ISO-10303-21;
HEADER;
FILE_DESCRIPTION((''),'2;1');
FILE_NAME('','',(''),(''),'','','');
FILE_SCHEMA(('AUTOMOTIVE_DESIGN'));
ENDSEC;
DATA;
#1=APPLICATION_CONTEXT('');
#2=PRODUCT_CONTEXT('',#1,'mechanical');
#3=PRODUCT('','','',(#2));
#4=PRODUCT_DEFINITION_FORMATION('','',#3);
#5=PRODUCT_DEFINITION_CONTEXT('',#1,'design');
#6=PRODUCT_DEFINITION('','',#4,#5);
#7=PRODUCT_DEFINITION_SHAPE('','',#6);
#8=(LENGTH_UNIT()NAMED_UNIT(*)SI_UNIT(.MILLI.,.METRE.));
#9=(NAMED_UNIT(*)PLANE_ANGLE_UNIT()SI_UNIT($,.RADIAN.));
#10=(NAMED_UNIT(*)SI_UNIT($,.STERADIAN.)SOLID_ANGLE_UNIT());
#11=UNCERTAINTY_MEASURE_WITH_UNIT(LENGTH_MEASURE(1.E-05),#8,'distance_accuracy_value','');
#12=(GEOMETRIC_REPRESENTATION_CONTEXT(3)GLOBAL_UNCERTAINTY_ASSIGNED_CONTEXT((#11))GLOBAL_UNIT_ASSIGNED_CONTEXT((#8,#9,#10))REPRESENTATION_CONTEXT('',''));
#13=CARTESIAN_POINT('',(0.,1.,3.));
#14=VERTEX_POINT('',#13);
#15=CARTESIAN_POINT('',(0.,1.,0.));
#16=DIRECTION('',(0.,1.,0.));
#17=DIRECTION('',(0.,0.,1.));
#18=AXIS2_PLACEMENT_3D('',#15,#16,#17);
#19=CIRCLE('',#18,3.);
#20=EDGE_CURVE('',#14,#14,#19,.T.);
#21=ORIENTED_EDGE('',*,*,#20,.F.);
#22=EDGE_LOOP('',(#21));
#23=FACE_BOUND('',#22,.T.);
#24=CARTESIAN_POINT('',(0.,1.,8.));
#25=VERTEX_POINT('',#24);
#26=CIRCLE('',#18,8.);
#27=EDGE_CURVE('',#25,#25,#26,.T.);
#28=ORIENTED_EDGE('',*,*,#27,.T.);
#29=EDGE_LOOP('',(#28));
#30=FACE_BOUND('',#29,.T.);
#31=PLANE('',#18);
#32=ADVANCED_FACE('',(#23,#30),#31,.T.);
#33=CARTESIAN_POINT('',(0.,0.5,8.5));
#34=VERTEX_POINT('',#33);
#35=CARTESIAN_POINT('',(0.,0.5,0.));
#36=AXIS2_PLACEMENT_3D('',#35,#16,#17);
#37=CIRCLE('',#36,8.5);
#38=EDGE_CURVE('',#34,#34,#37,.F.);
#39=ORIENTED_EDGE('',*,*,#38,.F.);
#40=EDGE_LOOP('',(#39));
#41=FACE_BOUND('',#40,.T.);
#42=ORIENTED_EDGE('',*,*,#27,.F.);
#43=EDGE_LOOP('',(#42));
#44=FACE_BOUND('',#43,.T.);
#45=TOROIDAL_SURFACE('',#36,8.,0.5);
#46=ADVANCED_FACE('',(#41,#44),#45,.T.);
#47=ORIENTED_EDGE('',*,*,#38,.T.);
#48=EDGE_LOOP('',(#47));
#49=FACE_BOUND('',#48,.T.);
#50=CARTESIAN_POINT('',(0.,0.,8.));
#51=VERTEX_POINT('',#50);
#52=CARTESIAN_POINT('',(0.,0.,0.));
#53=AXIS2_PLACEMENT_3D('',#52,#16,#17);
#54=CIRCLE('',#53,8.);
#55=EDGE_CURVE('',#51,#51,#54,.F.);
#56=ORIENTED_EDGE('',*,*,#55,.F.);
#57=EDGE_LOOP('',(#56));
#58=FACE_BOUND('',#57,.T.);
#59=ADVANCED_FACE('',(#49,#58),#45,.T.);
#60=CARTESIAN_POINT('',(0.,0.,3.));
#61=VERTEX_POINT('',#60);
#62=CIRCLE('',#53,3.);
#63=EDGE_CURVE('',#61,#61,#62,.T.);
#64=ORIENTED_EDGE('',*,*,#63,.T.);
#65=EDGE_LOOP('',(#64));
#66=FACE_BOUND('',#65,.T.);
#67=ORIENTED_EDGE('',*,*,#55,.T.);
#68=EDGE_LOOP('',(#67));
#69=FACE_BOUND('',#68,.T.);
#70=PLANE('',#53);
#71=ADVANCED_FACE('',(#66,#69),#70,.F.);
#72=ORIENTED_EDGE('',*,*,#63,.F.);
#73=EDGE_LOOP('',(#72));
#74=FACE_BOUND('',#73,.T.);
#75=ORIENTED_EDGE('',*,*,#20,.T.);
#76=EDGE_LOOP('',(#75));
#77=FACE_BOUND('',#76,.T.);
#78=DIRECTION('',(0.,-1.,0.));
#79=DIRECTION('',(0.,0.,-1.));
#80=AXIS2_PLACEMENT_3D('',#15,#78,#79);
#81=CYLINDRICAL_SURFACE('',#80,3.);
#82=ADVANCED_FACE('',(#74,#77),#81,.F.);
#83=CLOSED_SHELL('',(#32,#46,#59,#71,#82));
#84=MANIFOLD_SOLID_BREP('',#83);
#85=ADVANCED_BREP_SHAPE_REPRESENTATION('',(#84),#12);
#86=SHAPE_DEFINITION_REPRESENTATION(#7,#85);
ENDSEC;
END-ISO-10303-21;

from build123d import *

# Parameters (mm, degrees)
ESBO_O1_R                = 8.5
ESBO_O1_R_2              = 3
RESSALTO_EXTRUS_O1_DEPTH = 1
FILETE1_R                = 0.5


with BuildPart() as part:
    # Esboço1 → Ressalto-extrusão1 (new body)
    with BuildSketch(Plane(origin=(0, 0, 0), x_dir=(1, 0, 0), z_dir=(0, 1, 0))):
        with Locations(Location((0, 0, 0), (0, 0, 270))):
            Circle(ESBO_O1_R)
        with Locations(Location((0, 0, 0), (0, 0, 270))):
            Circle(ESBO_O1_R_2, mode=Mode.SUBTRACT)
    extrude(amount=RESSALTO_EXTRUS_O1_DEPTH)

    # Filete1
    filete1_edges = [part.edges().sort_by_distance(p)[0] for p in [
        (0, 0, -8.5),
        (0, 1, -8.5),
    ]]
    fillet(filete1_edges, radius=FILETE1_R - 0.0001)  # a hair under: the kernel refuses the full size


solid = part.part
